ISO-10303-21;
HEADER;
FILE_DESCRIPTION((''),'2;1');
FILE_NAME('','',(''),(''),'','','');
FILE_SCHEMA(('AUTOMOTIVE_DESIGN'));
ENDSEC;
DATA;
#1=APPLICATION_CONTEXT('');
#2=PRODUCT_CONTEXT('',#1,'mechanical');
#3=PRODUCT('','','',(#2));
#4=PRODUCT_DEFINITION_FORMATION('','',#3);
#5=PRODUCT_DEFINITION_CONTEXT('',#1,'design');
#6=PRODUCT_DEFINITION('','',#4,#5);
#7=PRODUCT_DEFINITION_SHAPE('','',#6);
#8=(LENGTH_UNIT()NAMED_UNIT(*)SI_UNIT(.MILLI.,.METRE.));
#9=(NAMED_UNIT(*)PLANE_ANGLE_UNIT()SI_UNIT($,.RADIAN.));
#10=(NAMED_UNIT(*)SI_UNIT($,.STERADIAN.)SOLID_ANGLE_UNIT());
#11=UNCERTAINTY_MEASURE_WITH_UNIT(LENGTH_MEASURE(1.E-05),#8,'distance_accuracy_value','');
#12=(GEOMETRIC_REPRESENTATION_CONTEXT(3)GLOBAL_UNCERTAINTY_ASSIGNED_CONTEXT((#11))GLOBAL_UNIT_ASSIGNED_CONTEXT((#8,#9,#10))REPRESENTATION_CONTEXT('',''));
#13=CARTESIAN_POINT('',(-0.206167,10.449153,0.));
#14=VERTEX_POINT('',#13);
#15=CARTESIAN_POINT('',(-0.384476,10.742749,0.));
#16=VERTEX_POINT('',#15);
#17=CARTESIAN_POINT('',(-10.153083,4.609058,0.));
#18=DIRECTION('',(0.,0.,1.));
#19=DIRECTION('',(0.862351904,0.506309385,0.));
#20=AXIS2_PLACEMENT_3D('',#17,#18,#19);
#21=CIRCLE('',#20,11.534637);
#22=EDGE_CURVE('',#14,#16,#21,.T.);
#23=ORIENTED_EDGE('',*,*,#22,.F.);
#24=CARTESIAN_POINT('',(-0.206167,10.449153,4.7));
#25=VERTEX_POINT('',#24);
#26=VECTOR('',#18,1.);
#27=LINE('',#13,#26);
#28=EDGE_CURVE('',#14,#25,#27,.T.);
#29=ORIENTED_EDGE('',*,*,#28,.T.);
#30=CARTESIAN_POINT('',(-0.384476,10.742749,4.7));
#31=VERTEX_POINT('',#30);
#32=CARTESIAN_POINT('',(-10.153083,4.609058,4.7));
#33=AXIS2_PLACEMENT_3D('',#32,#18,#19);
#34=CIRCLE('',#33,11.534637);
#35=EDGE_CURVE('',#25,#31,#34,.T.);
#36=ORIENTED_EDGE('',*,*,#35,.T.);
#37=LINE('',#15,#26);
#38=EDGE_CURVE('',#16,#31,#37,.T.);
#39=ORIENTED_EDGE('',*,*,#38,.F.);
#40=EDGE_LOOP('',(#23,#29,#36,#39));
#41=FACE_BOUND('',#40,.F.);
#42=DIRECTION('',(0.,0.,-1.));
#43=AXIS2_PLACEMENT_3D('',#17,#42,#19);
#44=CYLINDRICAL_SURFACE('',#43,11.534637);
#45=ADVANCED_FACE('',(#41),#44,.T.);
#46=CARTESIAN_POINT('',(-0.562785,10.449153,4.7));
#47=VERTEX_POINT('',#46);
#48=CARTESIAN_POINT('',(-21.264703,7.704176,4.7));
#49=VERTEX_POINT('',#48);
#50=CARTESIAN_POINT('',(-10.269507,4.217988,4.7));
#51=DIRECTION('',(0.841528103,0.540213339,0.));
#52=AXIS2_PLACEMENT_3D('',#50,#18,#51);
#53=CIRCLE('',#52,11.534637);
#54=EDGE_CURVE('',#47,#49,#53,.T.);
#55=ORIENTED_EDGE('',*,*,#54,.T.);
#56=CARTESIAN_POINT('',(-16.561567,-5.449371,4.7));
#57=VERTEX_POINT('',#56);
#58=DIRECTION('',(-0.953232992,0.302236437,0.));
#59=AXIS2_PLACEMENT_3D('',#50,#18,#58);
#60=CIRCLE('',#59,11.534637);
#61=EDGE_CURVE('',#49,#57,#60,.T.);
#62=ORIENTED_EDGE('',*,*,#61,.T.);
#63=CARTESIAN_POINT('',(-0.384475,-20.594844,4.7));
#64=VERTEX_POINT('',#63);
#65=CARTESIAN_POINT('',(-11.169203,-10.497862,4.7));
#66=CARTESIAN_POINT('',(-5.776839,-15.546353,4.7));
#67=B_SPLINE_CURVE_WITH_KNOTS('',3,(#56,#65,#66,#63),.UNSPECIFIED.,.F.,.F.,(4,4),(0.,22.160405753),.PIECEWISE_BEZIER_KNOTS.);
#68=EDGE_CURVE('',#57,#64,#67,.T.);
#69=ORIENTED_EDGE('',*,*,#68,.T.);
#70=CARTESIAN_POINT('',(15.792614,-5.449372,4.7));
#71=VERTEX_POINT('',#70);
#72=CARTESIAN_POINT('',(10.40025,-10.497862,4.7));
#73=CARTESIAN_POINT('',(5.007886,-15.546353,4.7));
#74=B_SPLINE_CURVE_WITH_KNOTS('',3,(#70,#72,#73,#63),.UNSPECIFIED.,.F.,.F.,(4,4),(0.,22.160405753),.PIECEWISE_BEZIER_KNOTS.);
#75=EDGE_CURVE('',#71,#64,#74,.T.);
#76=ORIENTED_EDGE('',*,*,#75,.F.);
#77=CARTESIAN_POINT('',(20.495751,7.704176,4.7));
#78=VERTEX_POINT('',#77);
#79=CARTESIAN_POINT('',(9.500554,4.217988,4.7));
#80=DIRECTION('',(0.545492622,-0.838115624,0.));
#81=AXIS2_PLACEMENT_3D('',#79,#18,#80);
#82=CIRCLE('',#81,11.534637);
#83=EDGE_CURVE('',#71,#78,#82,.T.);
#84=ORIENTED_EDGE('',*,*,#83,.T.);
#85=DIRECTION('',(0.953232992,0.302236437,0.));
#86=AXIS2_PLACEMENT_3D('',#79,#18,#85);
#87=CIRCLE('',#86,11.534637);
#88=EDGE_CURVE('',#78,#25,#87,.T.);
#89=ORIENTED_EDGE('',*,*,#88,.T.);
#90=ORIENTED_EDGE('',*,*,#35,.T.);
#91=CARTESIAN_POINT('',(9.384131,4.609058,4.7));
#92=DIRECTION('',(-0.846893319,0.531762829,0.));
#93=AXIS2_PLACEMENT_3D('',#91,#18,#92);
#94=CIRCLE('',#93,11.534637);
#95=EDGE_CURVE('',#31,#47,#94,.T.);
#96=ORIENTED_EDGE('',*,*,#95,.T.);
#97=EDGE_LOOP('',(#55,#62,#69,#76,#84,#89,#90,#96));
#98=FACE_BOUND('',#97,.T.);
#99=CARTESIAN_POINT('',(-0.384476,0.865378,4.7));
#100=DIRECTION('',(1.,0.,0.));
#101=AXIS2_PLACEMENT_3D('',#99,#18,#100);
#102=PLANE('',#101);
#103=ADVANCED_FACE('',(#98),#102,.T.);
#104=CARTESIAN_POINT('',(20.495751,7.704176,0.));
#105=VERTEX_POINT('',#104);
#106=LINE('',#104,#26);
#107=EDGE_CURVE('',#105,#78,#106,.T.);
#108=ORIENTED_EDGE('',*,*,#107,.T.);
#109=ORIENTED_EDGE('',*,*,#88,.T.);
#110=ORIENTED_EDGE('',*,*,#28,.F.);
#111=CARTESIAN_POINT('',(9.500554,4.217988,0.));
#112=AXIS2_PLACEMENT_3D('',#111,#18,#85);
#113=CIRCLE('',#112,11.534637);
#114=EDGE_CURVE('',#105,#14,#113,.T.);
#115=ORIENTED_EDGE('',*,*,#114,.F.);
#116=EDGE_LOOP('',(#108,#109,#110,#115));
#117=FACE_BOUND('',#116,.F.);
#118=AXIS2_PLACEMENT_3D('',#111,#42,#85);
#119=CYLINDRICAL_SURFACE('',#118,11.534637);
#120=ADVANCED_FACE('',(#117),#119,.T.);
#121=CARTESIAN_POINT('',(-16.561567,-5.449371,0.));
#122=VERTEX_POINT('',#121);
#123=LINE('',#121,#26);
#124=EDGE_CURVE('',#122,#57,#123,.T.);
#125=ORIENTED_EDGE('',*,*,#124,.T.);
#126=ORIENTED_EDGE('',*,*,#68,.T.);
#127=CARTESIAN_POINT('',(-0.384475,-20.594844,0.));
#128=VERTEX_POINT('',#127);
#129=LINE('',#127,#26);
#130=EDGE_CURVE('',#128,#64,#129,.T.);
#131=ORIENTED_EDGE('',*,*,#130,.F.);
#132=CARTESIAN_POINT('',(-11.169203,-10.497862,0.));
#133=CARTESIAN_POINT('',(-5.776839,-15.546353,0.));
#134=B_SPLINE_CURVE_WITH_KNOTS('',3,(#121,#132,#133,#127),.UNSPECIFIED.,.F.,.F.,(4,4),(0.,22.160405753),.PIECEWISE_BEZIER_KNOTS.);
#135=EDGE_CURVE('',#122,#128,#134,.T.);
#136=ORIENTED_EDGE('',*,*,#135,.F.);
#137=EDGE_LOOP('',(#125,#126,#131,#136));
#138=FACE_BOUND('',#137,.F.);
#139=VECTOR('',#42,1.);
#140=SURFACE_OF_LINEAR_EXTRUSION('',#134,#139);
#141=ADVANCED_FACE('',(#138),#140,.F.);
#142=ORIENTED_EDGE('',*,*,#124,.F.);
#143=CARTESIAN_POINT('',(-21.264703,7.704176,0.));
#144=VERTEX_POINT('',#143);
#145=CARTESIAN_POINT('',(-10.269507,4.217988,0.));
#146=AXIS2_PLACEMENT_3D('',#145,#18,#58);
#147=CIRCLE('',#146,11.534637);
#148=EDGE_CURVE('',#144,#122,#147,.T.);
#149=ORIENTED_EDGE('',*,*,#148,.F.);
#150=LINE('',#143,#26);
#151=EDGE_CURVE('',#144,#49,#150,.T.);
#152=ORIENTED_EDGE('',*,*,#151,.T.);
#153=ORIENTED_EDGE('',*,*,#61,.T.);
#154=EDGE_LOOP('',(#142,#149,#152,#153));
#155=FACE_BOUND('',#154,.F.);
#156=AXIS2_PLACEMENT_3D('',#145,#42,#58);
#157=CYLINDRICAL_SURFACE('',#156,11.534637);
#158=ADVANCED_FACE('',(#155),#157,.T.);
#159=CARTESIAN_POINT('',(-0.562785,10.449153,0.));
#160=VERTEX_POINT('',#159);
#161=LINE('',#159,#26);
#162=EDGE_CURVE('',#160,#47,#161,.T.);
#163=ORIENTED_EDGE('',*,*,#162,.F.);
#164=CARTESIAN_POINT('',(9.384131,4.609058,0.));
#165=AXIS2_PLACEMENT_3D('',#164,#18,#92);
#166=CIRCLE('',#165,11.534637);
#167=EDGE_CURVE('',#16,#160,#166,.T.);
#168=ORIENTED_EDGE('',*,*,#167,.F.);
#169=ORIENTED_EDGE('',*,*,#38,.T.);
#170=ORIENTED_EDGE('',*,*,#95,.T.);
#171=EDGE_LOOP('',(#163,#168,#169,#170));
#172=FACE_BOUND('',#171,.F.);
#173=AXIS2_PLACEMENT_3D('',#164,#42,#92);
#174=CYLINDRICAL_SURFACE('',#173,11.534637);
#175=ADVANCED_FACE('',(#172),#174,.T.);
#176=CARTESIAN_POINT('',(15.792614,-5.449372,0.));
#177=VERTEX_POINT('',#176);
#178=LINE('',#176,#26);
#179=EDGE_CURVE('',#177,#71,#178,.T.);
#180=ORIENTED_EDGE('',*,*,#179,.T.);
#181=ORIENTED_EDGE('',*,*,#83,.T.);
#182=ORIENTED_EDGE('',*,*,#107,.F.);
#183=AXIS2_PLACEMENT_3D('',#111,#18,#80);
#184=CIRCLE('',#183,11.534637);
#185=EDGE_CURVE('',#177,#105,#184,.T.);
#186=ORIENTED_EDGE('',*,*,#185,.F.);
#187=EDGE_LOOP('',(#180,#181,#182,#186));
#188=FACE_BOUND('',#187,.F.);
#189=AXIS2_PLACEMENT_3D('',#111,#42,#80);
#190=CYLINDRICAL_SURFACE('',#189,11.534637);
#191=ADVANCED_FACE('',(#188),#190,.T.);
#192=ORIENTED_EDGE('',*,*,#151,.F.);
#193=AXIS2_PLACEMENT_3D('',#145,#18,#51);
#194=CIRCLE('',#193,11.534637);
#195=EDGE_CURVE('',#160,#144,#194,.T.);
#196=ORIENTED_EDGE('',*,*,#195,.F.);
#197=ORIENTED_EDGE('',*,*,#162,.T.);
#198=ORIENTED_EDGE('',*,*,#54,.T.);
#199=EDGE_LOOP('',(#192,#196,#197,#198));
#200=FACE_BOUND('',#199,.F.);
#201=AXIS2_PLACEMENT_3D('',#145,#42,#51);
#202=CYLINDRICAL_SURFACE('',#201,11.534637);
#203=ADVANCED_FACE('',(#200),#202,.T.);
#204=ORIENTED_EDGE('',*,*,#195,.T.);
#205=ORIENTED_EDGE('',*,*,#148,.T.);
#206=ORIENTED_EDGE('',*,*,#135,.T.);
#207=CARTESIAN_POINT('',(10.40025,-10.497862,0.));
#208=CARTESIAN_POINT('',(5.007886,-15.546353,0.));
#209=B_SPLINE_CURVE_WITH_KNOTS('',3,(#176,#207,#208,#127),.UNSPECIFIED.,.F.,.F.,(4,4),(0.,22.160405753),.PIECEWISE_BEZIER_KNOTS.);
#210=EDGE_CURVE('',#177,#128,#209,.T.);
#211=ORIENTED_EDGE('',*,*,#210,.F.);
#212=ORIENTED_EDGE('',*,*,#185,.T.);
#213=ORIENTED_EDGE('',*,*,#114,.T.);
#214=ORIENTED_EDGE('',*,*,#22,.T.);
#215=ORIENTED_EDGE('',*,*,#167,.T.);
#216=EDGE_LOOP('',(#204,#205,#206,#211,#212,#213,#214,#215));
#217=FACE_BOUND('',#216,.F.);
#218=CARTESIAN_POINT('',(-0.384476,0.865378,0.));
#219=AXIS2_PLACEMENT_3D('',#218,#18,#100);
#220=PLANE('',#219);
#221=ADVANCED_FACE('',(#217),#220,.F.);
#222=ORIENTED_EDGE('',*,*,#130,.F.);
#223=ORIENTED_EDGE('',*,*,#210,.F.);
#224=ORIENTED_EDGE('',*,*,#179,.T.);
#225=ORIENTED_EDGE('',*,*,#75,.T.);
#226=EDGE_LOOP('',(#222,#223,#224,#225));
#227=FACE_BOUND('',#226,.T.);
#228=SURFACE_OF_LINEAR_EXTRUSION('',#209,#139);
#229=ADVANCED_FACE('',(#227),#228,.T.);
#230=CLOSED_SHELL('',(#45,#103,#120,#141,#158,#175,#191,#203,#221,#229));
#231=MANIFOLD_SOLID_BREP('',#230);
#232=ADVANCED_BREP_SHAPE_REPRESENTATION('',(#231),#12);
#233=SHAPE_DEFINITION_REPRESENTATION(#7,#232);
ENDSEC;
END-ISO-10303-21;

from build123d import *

# Parameters (mm, degrees)
F1_DEPTH = 4.7


# Not quite as in the source:
# - ends of sketch curves that miss each other by under 0.0002 mm in the source are joined


with BuildPart() as f1:
    # F0 (on Top) → F1 (new body)
    with BuildSketch(Plane.XY):
        with BuildLine():
            ThreePointArc((-0.3844762757, 10.7427490547), (-0.4747238326, 10.5966147256), (-0.5627854477, 10.4491528132))
            ThreePointArc((-0.5627854477, 10.4491528132), (-11.7856752997, 15.6525446469), (-21.2647033533, 7.7041756091))
            ThreePointArc((-21.2647033533, 7.7041756091), (-21.1307340877, 0.3344853052), (-16.56156694, -5.4493710653))
            add(Edge.make_bspline(
                [(-16.56156694, -5.4493710653), (-11.1692026058, -10.4978622247), (-5.776839051, -15.5463528768), (-0.3844754963, -20.5948435289)],
                knots=[0, 0, 0, 0, 22.160405753, 22.160405753, 22.160405753, 22.160405753], degree=3))
            add(Edge.make_bspline(
                [(15.7926136092, -5.4493715726), (10.4002500544, -10.4978622247), (5.0078864997, -15.5463528768), (-0.3844754963, -20.5948435289)],
                knots=[0, 0, 0, 0, 22.160405753, 22.160405753, 22.160405753, 22.160405753], degree=3))
            ThreePointArc((15.7926136092, -5.4493715726), (20.3617815363, 0.3344853052), (20.495750802, 7.7041756091))
            ThreePointArc((20.495750802, 7.7041756091), (11.0167227483, 15.6525446469), (-0.2061671036, 10.4491528132))
            ThreePointArc((-0.2061671036, 10.4491528132), (-0.2942287187, 10.5966147256), (-0.3844762757, 10.7427490547))
        make_face()
    extrude(amount=F1_DEPTH)


solid = f1.part
